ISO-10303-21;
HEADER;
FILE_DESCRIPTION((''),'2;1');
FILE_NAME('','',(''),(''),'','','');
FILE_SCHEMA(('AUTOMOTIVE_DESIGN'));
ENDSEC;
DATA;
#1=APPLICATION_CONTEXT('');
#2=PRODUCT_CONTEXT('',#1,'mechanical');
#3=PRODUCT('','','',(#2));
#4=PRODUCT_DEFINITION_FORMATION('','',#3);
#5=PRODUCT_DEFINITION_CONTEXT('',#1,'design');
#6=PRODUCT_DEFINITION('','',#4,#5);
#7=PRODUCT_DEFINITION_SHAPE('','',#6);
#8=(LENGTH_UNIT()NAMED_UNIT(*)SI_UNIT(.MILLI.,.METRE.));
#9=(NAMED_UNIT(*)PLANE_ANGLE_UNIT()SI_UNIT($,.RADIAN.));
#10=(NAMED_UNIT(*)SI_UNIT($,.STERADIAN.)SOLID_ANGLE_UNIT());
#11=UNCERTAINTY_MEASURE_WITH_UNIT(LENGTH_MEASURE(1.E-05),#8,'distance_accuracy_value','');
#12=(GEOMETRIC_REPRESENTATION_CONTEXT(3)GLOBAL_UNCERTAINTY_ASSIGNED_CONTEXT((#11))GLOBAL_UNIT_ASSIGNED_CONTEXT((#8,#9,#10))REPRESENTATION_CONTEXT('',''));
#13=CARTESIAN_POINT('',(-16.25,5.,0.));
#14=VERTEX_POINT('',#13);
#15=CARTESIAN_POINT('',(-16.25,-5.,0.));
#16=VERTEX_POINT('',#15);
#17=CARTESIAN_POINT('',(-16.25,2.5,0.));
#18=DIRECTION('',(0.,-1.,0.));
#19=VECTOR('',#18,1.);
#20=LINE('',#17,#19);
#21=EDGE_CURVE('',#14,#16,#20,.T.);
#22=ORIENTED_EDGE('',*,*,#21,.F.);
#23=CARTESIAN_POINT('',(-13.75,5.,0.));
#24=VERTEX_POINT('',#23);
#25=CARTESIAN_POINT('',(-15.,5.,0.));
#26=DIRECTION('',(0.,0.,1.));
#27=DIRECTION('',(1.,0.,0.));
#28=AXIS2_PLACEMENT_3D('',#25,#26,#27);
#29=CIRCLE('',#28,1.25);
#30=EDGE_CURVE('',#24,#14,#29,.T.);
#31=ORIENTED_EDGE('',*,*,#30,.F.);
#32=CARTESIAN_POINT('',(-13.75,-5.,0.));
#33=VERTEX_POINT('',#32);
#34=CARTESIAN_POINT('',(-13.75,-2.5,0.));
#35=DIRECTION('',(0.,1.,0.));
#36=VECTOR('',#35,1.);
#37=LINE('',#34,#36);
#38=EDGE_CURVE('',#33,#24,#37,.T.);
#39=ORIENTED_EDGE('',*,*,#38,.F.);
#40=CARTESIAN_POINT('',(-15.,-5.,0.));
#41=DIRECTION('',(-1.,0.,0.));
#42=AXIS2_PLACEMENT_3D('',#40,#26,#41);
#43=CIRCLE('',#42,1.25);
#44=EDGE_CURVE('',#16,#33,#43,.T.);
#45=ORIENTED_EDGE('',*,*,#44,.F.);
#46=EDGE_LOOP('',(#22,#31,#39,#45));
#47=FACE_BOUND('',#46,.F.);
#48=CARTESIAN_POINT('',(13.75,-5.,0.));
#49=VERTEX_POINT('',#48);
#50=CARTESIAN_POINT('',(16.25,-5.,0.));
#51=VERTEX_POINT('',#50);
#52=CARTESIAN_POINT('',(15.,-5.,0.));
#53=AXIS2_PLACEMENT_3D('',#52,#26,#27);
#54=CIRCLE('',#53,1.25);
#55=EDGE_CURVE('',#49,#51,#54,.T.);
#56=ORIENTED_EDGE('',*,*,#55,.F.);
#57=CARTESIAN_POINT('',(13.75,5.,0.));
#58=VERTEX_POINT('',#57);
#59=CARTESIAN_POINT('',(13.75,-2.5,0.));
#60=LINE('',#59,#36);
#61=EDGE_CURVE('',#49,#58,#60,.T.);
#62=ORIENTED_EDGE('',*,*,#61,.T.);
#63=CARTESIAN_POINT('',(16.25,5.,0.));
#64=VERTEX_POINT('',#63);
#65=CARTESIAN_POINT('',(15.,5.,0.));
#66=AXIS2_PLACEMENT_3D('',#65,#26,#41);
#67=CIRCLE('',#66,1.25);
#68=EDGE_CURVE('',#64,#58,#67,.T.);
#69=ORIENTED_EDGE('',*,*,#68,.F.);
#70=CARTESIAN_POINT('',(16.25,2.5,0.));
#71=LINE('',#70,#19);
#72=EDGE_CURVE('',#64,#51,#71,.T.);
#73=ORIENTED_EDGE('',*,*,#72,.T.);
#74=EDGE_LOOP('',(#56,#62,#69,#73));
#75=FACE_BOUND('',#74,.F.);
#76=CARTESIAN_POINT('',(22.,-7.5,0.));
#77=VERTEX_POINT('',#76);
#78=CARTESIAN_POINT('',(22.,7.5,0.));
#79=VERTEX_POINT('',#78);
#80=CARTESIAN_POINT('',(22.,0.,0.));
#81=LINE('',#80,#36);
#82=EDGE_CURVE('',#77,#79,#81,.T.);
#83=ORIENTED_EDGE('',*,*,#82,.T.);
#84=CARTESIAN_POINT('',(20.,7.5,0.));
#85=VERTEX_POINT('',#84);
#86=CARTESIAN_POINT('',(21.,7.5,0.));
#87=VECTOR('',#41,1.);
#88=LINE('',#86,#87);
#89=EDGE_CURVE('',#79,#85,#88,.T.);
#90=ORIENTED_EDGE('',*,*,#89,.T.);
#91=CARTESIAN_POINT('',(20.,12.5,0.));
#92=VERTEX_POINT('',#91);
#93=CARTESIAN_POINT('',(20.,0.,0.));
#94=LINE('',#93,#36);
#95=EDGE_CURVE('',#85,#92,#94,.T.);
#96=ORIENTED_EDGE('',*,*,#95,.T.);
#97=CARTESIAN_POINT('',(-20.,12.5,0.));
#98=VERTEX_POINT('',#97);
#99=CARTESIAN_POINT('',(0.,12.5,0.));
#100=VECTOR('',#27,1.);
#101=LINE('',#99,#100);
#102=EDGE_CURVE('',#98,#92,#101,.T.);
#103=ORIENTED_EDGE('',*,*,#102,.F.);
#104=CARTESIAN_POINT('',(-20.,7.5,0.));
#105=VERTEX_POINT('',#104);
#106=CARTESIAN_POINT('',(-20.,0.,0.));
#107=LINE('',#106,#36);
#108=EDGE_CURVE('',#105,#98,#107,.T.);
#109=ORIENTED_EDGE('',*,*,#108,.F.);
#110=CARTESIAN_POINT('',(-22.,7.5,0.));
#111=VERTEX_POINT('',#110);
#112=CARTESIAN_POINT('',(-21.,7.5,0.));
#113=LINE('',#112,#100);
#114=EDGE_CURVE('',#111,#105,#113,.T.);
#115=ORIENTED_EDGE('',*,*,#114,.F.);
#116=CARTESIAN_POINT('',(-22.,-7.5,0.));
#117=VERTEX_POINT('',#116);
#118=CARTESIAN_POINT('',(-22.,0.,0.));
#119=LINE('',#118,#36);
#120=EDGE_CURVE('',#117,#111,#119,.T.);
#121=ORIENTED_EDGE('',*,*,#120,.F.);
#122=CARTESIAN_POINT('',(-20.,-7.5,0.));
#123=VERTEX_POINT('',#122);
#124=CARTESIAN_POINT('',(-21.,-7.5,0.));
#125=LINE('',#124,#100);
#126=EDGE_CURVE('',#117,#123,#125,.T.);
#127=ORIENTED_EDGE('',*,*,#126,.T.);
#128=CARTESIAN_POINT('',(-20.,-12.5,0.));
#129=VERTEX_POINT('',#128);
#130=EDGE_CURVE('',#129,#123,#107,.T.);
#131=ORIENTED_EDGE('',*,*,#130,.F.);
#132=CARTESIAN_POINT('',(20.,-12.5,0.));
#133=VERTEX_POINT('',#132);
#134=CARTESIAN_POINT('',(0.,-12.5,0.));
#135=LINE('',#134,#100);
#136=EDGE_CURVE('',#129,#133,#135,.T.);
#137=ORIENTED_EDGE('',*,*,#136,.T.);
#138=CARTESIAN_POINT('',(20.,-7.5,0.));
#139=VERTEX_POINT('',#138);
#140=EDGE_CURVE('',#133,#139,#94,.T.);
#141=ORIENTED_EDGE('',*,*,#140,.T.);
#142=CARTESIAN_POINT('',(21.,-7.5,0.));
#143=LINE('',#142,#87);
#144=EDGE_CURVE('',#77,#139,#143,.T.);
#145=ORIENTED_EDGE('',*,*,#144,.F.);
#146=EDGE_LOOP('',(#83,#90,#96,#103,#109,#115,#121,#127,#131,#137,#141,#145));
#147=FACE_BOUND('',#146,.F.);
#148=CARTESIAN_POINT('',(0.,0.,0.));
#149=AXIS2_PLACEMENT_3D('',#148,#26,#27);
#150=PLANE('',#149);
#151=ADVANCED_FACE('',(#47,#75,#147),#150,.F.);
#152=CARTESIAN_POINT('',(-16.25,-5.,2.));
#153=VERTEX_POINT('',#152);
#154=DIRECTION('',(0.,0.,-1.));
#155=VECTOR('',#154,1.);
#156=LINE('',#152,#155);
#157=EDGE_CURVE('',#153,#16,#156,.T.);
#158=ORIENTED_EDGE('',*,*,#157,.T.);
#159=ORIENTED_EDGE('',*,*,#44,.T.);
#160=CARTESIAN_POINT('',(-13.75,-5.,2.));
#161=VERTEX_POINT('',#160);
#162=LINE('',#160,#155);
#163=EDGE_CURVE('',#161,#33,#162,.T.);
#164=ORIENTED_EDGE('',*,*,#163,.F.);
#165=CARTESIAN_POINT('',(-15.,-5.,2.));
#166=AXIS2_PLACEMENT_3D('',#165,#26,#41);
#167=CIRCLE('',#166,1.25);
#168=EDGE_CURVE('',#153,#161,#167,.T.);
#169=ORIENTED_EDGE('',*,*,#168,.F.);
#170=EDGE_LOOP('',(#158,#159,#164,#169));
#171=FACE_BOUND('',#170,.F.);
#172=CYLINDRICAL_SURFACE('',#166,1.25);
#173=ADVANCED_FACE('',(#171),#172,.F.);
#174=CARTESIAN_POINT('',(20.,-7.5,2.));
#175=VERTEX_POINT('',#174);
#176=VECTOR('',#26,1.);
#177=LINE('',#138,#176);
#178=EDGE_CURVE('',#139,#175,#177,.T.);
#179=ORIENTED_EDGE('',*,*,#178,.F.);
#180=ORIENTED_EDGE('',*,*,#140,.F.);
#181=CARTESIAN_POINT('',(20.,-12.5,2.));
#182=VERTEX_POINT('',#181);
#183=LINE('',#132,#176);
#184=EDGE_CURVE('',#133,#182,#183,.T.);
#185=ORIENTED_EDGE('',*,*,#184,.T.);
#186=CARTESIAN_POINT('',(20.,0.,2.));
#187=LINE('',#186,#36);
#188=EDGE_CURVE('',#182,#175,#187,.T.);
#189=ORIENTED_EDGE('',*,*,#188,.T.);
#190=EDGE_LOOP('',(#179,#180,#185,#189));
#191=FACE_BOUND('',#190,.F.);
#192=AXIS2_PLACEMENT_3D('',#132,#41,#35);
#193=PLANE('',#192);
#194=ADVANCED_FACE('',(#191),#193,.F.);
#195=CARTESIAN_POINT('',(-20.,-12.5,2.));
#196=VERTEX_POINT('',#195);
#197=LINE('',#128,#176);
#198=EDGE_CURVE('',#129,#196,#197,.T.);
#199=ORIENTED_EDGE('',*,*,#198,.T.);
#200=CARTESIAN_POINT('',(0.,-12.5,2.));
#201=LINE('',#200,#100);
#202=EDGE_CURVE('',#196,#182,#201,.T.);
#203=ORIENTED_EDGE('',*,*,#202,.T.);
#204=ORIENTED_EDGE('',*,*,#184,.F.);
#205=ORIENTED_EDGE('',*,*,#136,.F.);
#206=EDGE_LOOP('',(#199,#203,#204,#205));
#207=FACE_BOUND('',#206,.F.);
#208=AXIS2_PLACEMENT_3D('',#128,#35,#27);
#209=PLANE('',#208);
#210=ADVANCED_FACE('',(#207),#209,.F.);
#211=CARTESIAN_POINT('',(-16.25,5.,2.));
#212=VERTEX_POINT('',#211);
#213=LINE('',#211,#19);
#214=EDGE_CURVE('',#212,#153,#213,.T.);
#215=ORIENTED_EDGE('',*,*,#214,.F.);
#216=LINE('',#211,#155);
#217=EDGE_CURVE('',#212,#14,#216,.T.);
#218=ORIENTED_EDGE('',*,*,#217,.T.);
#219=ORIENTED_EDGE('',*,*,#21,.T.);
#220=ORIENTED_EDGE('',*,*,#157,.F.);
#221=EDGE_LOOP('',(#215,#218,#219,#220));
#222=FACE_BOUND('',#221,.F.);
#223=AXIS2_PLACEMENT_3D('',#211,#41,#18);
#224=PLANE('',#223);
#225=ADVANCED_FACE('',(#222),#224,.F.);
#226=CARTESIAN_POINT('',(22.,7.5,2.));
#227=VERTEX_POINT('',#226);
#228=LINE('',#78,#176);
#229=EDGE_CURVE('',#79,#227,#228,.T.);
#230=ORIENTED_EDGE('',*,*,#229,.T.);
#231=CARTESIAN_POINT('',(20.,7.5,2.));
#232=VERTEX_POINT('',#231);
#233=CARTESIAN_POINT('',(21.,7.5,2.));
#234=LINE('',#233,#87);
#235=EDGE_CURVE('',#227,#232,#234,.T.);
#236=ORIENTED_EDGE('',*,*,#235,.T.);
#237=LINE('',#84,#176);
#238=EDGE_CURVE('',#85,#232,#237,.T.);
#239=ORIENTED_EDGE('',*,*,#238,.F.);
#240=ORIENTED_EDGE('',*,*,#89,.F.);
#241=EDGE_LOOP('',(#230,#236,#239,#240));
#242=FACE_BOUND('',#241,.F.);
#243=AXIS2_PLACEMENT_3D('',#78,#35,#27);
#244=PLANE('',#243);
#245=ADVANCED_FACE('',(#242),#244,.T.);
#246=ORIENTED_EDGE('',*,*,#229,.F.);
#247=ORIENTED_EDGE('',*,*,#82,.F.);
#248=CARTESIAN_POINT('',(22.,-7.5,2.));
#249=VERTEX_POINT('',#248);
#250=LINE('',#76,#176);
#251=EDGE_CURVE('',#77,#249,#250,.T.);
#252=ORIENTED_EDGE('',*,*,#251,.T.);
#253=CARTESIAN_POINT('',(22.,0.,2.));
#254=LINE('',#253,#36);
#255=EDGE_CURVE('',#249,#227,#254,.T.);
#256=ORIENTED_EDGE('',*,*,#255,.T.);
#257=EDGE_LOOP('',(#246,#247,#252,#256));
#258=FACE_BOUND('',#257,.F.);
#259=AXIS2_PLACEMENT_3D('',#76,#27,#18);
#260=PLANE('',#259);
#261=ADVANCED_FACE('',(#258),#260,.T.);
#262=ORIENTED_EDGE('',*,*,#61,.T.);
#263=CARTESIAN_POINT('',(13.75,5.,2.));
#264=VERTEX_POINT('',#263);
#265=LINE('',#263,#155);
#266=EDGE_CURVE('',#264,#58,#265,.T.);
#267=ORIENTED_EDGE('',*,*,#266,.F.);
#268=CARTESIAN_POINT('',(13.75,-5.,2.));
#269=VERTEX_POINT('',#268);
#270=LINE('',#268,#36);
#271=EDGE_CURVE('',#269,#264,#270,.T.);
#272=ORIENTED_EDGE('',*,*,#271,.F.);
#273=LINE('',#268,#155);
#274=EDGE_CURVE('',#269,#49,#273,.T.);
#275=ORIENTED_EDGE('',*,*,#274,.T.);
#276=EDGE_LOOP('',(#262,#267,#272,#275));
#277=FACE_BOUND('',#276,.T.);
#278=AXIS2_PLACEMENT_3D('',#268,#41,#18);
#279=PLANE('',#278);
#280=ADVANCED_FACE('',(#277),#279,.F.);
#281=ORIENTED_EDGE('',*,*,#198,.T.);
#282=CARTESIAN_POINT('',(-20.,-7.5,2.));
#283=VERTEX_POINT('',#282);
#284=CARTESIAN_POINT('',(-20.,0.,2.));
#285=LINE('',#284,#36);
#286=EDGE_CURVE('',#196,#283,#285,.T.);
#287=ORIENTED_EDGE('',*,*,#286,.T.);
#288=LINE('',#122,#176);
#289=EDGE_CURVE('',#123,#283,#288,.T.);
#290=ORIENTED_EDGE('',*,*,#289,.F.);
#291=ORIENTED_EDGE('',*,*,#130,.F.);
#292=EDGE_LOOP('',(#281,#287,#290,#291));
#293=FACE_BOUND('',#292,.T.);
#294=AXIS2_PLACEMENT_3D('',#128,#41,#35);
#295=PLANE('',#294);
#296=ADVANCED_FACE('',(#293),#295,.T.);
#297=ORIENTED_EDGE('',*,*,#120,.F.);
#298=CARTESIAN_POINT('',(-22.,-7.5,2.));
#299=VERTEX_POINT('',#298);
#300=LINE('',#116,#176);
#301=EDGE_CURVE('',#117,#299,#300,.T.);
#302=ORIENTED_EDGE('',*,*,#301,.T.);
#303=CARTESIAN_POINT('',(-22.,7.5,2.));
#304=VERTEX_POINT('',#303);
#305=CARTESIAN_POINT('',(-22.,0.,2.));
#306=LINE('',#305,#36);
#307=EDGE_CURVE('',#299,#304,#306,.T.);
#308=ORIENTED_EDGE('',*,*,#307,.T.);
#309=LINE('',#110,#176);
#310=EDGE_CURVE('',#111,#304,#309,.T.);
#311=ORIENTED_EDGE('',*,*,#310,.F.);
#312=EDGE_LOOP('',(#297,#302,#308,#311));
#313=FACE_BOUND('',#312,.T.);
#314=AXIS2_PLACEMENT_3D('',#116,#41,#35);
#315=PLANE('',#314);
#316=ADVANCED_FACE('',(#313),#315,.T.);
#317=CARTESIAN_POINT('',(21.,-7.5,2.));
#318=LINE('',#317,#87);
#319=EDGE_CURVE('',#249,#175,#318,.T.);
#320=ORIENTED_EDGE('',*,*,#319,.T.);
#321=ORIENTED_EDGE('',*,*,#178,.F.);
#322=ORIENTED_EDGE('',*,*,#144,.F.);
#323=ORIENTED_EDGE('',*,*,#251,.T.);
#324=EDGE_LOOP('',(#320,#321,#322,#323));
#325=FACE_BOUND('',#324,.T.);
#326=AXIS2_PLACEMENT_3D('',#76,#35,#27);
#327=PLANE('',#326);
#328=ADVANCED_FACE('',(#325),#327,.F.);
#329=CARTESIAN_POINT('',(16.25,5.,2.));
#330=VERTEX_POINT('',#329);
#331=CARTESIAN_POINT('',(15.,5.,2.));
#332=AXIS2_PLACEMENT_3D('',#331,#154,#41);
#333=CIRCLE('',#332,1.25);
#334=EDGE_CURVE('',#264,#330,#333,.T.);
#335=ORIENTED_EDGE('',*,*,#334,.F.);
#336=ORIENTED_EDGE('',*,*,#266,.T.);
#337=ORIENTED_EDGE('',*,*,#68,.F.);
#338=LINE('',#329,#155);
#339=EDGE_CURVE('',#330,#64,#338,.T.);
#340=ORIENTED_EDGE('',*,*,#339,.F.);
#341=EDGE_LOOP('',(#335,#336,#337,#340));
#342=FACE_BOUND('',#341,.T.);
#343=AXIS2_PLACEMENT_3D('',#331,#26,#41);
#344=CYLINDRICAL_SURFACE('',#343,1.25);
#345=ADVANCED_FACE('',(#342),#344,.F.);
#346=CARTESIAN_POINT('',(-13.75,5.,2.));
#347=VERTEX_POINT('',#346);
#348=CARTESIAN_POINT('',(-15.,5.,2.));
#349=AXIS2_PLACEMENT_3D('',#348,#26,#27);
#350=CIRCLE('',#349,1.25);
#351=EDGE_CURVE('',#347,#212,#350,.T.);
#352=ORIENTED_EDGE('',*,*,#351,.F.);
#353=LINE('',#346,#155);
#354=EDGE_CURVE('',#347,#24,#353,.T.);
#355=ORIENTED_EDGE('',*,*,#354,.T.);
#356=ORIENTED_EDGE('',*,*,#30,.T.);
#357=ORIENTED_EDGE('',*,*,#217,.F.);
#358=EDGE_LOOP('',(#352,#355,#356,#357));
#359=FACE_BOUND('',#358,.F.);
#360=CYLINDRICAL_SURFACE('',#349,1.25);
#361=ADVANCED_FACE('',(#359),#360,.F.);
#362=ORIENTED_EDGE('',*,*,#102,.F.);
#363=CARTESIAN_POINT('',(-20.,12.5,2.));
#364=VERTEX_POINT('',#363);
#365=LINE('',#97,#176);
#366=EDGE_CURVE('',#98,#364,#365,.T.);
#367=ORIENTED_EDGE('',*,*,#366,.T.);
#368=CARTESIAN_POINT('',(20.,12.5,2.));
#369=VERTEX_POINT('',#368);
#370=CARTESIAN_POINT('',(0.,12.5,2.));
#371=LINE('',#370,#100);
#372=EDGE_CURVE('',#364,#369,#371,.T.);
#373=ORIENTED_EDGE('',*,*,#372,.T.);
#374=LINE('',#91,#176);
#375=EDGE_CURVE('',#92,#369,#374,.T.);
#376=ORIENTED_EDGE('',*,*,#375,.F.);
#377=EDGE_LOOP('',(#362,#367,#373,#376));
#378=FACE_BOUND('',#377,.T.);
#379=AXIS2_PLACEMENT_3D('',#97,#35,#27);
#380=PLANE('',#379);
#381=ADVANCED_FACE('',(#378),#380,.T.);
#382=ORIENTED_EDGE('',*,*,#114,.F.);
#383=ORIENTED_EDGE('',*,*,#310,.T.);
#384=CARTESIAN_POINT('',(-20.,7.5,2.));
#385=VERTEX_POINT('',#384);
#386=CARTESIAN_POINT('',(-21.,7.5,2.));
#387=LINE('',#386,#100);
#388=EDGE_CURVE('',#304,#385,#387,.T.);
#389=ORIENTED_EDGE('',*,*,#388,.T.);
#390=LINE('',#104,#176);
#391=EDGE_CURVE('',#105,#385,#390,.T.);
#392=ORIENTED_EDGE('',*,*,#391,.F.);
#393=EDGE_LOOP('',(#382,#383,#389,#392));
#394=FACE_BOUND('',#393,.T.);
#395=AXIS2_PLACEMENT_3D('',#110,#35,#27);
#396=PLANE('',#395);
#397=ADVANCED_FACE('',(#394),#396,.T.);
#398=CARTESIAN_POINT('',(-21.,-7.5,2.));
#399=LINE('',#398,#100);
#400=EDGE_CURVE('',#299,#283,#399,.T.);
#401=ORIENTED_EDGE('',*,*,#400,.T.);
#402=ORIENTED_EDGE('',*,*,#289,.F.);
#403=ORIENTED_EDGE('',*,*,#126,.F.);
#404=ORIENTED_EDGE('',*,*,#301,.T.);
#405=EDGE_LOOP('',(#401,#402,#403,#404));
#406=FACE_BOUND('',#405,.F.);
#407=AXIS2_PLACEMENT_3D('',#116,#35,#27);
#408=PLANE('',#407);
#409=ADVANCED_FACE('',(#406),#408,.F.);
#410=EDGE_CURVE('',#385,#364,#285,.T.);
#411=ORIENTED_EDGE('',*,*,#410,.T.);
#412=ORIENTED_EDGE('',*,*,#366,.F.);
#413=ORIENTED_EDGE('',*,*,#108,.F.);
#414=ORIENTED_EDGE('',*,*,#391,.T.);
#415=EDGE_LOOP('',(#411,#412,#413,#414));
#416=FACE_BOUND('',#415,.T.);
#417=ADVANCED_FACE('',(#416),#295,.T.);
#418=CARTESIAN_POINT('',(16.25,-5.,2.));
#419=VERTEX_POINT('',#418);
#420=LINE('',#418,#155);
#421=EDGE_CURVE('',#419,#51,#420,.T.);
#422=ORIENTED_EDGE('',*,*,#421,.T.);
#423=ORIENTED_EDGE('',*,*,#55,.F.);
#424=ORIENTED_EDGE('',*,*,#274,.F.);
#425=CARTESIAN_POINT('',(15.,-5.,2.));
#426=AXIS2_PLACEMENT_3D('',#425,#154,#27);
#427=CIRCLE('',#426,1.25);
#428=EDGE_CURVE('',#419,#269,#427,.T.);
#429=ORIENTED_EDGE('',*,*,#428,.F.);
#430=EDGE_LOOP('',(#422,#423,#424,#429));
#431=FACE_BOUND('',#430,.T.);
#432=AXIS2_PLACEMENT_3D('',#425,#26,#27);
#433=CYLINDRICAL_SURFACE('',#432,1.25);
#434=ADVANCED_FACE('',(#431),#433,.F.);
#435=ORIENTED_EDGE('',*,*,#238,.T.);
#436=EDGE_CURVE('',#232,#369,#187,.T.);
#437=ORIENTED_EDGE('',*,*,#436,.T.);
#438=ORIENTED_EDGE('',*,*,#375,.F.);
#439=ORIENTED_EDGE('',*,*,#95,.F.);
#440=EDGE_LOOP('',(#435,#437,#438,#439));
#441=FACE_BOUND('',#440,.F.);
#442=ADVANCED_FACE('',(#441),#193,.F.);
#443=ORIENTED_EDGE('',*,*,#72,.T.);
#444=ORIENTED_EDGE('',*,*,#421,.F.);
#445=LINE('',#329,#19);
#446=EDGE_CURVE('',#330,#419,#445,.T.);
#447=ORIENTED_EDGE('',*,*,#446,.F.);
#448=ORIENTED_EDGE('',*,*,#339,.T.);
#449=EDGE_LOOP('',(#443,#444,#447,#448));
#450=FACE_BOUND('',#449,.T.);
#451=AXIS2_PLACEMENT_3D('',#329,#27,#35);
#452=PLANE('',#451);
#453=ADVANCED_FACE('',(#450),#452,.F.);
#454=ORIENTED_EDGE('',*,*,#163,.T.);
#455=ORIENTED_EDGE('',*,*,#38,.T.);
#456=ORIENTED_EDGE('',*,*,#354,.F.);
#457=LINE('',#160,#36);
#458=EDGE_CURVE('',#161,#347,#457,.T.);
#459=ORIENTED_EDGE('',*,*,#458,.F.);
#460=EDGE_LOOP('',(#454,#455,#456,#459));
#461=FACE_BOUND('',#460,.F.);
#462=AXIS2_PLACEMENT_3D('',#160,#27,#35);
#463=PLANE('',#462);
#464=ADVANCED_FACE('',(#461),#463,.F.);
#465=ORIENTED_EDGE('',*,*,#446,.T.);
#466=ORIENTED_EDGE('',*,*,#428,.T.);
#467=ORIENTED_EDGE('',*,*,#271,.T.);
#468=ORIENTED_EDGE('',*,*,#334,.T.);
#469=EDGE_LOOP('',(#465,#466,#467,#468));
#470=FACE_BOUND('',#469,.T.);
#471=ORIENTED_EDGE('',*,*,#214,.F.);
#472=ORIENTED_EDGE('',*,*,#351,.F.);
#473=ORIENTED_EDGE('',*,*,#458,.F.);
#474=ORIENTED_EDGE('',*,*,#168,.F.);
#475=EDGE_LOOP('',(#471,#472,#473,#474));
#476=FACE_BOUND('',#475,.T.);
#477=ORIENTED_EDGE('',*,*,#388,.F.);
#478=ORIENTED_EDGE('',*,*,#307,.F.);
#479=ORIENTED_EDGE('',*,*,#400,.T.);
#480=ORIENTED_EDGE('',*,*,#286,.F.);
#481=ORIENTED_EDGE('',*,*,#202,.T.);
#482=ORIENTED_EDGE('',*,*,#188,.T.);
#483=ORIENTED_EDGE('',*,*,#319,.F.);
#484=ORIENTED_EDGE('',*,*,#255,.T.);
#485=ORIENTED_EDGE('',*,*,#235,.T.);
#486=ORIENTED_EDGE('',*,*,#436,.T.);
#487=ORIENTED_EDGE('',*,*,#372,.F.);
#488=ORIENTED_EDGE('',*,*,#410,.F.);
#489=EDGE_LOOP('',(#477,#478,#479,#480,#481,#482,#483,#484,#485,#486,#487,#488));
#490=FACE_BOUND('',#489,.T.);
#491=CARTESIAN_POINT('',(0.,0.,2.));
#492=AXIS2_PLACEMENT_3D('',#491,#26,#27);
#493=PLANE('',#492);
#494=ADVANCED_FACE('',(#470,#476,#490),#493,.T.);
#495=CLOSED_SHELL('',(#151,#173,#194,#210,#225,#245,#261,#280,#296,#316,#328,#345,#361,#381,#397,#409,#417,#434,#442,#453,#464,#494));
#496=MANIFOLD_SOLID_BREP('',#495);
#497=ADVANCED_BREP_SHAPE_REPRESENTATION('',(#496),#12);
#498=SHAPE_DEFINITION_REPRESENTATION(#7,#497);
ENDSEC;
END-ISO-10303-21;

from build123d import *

# Parameters (mm, degrees)
F0_W     = 40
F0_H     = 25
F1_DEPTH = 2
F2_W     = 2
F2_H     = 15
F3_DEPTH = 2
F5_DEPTH = 2.001


# Not quite as in the source:
# - a pattern or mirror of a feature is missing from the dataset's text; its kind, count and spacing are read off the source's solid


with BuildPart() as f1:
    # F0 (on Top) → F1 (new body)
    with BuildSketch(Plane.XY):
        Rectangle(F0_W, F0_H)
    extrude(amount=F1_DEPTH)

    # F2 (on Top) → F3 (join)
    with BuildSketch(Plane.XY):
        with Locations((-21, 0)):
            Rectangle(F2_W, F2_H)
    f3 = extrude(amount=F3_DEPTH)

    # F3_copies: F3 across plane
    add(f3.mirror(Plane(origin=(0, 0, 0), x_dir=(0, 0, 1), z_dir=(1, 0, 0))))

    # F4 (on face) → F5 (cut, through all)
    with BuildSketch(Plane.XY.offset(2)):
        with BuildLine():
            ThreePointArc((-13.75, 5), (-15, 6.25), (-16.25, 5))
            Line((-16.25, 5), (-16.25, -5))
            ThreePointArc((-16.25, -5), (-15, -6.25), (-13.75, -5))
            Line((-13.75, -5), (-13.75, 5))
        make_face()
    f5 = extrude(amount=-F5_DEPTH, mode=Mode.SUBTRACT)

    # F5_copies: F5 across plane
    add(f5.mirror(Plane(origin=(0, 0, 0), x_dir=(0, 0, 1), z_dir=(1, 0, 0))), mode=Mode.SUBTRACT)


solid = f1.part
